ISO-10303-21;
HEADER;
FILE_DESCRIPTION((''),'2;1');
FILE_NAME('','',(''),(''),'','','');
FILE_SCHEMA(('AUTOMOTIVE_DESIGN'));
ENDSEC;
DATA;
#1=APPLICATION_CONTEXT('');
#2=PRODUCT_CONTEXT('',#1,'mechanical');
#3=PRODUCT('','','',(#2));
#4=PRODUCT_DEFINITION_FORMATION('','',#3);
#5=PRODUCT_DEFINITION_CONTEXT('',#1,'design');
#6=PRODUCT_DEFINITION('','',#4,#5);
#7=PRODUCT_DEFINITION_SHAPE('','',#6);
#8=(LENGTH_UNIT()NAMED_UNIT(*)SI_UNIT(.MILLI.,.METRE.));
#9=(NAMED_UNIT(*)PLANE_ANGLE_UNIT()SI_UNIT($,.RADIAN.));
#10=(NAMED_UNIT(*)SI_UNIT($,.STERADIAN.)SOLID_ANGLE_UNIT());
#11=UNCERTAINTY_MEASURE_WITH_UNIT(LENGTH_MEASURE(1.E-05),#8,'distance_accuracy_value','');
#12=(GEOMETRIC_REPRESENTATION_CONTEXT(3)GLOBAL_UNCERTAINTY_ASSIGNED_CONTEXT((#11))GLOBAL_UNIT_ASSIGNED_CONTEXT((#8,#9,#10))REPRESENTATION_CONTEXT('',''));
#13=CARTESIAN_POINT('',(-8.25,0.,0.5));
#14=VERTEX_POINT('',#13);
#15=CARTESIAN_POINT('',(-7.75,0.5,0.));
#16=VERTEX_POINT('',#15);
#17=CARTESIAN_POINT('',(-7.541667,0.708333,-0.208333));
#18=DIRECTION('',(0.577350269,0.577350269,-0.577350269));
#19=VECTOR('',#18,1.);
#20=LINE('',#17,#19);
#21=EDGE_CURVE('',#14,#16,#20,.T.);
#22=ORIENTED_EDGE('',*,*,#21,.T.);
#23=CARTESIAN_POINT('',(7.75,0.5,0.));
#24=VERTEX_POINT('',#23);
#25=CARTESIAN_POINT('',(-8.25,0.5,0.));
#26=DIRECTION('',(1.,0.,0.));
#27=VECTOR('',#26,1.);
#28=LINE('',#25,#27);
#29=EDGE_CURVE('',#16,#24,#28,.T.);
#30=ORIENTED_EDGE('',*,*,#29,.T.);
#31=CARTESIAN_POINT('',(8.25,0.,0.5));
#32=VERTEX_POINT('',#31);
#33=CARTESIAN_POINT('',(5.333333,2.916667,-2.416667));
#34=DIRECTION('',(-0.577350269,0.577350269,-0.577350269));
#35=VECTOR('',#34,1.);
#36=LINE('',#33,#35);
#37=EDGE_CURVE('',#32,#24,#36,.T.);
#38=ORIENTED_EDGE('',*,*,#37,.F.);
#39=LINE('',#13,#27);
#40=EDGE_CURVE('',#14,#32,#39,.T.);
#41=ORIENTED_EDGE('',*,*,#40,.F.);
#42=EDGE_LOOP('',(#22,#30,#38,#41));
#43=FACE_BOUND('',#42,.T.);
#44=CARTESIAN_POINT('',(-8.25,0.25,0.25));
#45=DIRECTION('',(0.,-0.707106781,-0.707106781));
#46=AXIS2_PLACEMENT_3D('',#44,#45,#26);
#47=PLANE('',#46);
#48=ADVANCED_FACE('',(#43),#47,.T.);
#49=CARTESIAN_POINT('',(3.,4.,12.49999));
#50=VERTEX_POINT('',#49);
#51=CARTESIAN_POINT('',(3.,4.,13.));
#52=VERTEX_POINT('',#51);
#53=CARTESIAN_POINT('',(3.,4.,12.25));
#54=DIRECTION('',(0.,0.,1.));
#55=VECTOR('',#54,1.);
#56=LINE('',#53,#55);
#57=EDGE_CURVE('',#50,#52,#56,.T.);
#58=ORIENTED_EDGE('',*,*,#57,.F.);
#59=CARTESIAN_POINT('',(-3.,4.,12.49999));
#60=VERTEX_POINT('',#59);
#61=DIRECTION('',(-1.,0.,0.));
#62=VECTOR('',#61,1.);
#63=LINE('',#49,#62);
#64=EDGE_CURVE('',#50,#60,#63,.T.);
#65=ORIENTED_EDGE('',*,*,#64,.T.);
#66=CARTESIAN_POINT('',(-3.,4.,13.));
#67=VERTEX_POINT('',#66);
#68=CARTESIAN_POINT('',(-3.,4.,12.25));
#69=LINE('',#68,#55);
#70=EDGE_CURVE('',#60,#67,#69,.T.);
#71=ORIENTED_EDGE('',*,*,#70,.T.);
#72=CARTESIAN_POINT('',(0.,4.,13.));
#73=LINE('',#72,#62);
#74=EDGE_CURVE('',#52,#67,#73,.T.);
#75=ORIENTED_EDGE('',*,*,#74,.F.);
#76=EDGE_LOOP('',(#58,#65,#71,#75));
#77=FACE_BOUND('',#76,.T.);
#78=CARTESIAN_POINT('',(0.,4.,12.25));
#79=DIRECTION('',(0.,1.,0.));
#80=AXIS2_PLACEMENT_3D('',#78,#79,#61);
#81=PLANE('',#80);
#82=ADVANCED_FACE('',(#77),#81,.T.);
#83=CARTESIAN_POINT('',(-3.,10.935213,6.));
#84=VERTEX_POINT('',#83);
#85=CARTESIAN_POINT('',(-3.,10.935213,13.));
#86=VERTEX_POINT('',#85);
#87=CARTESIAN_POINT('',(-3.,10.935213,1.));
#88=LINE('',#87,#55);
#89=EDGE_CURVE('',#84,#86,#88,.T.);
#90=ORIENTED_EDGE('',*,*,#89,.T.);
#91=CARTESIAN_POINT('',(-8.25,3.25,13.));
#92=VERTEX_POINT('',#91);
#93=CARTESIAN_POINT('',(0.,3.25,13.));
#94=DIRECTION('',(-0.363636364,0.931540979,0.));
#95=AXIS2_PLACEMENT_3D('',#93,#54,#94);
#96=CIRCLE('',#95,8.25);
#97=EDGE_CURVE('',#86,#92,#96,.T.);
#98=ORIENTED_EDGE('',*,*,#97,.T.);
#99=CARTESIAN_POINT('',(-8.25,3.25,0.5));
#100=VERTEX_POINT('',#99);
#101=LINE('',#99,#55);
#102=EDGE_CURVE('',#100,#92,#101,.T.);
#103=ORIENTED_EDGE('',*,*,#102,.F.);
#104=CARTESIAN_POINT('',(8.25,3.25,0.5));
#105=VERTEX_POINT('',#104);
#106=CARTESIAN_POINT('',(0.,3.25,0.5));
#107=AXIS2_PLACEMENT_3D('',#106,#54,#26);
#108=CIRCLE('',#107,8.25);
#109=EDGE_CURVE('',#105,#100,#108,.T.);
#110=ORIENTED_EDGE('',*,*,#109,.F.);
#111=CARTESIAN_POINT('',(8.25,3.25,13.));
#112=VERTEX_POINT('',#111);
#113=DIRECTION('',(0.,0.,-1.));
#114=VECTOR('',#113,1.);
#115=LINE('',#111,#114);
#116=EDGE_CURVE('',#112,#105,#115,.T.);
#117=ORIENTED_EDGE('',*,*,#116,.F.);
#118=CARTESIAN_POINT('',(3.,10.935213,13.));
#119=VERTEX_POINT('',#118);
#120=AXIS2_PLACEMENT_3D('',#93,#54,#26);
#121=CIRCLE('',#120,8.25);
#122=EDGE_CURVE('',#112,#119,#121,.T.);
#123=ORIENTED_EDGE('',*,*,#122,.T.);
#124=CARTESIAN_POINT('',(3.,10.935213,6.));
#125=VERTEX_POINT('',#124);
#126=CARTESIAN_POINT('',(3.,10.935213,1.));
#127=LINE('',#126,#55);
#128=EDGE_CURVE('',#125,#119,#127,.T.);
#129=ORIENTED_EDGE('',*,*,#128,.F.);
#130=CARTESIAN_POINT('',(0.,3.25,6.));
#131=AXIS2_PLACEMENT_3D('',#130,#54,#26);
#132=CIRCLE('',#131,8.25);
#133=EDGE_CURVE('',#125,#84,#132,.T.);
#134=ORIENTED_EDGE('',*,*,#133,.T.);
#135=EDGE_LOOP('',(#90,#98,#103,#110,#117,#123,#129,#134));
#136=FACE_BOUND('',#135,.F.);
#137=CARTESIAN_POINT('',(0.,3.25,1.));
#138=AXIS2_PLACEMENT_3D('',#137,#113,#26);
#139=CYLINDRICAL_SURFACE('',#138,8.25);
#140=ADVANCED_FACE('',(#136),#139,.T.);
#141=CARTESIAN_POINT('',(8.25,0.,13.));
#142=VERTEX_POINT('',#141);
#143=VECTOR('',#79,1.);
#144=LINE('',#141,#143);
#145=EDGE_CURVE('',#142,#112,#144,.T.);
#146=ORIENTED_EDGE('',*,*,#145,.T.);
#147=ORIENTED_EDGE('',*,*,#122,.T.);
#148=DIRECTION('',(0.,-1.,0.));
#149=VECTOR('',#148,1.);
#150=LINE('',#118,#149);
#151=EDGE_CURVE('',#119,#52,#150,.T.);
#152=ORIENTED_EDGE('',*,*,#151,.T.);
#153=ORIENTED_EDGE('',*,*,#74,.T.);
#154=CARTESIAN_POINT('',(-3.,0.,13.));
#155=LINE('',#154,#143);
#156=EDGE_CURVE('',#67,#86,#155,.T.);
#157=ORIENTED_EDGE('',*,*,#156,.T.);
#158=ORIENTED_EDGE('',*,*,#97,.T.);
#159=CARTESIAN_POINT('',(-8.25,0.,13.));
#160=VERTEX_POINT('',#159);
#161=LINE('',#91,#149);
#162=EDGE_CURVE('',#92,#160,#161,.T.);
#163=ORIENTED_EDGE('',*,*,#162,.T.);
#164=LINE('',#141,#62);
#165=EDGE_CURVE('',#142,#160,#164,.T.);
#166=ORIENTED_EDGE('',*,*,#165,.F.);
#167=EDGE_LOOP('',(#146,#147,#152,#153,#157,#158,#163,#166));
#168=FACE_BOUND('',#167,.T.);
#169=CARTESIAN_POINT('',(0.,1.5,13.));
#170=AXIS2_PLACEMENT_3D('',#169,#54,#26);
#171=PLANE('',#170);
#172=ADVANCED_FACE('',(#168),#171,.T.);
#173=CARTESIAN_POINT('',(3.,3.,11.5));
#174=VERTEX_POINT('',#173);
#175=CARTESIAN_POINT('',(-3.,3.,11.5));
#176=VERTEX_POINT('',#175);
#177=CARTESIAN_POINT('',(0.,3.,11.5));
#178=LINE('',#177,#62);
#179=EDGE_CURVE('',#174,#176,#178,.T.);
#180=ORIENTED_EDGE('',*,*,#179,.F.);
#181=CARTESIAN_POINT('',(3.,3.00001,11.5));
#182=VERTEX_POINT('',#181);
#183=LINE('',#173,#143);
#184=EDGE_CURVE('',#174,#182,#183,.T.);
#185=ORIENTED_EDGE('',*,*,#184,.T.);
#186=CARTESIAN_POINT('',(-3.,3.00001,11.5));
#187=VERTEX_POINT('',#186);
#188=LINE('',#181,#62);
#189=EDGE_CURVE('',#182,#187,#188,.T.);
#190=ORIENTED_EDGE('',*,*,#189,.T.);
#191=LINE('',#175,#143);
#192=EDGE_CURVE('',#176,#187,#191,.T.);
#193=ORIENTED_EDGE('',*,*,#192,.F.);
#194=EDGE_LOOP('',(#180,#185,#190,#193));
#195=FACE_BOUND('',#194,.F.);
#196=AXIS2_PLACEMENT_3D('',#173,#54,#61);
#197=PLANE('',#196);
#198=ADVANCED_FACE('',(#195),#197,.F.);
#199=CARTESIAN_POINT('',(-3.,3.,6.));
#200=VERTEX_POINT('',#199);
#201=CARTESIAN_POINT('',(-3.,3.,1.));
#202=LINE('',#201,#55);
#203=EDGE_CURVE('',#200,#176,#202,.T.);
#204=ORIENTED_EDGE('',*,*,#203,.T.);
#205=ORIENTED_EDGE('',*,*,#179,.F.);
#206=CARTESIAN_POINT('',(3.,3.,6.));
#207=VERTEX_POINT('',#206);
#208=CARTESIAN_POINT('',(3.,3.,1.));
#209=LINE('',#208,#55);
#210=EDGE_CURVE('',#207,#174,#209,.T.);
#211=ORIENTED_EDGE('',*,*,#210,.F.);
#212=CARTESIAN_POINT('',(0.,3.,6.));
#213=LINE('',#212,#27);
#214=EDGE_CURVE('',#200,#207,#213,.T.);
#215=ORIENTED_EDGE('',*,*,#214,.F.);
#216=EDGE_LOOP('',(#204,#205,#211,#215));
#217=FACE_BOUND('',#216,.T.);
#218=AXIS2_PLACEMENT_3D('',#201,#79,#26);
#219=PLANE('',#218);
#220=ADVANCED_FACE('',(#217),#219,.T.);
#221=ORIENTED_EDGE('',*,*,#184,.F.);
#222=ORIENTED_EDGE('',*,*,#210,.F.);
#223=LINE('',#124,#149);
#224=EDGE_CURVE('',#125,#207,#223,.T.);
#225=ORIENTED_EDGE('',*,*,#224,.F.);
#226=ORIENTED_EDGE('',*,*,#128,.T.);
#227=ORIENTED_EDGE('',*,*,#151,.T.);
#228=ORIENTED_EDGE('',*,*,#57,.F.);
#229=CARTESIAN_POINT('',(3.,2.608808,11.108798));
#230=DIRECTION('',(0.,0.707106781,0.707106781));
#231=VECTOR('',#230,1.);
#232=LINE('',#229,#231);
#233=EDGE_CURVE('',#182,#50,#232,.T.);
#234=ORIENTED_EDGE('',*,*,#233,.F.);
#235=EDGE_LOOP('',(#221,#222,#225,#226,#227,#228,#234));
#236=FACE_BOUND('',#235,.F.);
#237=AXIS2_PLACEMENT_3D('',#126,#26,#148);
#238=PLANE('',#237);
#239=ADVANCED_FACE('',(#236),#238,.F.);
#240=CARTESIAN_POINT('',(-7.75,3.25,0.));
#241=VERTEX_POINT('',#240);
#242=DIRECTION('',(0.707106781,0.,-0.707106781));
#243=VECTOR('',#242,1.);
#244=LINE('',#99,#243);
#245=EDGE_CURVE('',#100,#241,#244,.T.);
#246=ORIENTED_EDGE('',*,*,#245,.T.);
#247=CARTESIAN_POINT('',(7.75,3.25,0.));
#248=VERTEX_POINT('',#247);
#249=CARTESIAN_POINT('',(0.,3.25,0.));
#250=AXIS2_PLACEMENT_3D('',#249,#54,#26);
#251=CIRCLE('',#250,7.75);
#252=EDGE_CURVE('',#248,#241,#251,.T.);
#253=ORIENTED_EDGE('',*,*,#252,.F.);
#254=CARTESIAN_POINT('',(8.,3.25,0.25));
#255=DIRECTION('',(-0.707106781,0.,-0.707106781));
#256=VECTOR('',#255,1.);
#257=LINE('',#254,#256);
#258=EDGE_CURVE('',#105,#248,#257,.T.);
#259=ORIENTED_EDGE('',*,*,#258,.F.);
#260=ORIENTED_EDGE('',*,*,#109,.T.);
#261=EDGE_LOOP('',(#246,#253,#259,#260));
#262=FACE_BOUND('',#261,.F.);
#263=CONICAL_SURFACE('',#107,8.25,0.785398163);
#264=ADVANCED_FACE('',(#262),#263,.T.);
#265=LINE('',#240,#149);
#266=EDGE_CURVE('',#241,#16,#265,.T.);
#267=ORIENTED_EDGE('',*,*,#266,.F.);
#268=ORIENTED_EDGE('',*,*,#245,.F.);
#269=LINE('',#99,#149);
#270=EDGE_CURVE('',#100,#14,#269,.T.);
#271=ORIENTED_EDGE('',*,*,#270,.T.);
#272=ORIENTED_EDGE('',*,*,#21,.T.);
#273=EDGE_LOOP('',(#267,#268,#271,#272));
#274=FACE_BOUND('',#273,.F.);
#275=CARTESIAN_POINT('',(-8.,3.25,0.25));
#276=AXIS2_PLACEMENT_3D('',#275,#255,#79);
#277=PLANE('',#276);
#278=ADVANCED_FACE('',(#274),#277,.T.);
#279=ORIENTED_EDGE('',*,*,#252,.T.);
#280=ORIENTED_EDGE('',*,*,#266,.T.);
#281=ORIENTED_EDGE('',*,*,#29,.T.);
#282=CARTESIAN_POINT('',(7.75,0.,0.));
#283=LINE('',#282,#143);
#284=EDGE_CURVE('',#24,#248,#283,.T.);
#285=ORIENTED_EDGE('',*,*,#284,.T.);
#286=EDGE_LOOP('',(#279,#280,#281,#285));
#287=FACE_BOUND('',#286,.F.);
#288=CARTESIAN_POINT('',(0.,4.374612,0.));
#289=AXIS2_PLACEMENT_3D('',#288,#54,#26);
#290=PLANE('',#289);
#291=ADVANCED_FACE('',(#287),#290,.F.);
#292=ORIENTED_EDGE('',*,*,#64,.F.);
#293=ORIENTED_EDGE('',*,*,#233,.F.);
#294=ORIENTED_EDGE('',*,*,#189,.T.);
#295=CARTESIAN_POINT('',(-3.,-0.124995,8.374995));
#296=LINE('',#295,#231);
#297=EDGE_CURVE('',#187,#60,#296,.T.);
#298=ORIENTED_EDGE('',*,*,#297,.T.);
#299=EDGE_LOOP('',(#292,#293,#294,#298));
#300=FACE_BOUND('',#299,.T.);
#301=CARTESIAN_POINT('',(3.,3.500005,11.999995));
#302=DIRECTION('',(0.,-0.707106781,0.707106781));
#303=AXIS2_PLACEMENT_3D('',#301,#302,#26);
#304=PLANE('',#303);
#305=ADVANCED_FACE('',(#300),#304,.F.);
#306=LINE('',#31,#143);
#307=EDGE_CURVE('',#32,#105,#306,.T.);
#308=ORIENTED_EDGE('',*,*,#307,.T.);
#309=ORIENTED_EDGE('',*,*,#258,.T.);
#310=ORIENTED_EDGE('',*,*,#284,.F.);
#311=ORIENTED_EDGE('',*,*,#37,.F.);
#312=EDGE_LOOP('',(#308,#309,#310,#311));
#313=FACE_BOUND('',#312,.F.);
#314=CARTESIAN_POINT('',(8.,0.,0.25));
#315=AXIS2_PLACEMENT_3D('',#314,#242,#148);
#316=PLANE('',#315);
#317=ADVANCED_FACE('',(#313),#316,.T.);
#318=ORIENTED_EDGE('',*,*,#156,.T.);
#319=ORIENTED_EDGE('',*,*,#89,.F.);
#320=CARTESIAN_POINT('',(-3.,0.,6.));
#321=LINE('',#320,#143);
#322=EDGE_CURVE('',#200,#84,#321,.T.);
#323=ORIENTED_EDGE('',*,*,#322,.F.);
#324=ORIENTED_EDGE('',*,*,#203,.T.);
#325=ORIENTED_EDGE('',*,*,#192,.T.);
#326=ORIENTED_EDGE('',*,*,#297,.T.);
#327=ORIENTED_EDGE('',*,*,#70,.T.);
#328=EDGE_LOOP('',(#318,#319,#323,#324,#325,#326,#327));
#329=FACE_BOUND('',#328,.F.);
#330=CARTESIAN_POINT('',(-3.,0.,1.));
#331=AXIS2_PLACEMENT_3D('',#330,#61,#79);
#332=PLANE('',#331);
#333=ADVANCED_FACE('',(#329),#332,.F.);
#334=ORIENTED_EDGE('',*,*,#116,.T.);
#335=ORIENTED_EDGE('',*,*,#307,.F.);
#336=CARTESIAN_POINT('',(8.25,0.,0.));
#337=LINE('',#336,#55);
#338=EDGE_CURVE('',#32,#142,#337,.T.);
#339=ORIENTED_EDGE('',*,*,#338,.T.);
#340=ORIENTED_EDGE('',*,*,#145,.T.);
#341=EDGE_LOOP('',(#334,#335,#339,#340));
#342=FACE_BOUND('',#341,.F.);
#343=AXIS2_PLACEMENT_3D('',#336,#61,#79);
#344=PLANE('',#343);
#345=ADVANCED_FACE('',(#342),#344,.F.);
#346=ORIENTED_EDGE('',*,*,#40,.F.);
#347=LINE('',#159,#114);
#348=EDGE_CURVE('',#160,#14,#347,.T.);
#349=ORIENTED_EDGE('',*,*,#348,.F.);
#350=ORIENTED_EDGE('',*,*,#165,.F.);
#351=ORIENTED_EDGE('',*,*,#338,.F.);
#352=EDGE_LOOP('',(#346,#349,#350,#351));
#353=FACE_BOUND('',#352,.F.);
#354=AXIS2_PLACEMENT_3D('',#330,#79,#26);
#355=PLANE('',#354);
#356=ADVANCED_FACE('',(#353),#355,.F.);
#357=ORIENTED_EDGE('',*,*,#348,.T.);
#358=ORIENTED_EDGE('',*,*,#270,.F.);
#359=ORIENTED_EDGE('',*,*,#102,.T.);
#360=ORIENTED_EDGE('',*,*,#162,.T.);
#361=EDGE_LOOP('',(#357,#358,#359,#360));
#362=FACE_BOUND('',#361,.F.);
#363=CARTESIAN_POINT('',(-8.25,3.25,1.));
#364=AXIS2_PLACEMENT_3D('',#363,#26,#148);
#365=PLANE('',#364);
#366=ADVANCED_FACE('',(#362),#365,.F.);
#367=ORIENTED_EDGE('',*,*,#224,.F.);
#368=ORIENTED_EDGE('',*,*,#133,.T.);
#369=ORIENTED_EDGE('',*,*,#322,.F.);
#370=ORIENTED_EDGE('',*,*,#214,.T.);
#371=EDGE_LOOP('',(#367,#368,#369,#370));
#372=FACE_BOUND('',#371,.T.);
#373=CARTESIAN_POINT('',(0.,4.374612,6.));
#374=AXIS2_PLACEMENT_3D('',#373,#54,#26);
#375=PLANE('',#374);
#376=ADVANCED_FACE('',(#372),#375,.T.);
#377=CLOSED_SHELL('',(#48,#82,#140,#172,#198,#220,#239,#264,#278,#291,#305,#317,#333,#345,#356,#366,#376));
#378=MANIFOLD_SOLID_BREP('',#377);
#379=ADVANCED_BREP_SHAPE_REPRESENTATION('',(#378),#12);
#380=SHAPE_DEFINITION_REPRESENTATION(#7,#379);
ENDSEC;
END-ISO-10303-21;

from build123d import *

# Parameters (mm, degrees)
F4_DEPTH  = 1
F6_DEPTH  = 12
F7_SIZE   = 0.5
F8_W      = 6
F8_H      = 3
F9_DEPTH  = 12
F10_DEPTH = 5
F11_W     = 6
F11_H     = 1.5
F12_DEPTH = 1
F13_SIZE  = 0.99999


# Not quite as in the source:
# - a fillet or chamfer is up to 0.001 mm smaller than in the source, because OpenCascade refuses the exact size


with BuildPart() as f4:
    # F3 (on Top) → F4 (new body)
    with BuildSketch(Plane.XY):
        with BuildLine():
            Line((-8.25, 0), (0, 0))
            Line((0, 0), (8.25, 0))
            Line((8.25, 0), (8.25, 3.25))
            ThreePointArc((8.25, 3.25), (0, 11.5), (-8.25, 3.25))
            Line((-8.25, 3.25), (-8.25, 0))
        make_face()
    extrude(amount=F4_DEPTH)

    # F5 (on face) → F6 (join)
    with BuildSketch(Plane.XY.offset(1)):
        with BuildLine():
            Line((-3, 0), (-3, 10.9352130745))
            ThreePointArc((-3, 10.9352130745), (-6.8122132967, 7.9036276172), (-8.25, 3.25))
            Line((-8.25, 3.25), (-8.25, 0))
            Line((-8.25, 0), (-3, 0))
        make_face()
        with BuildLine():
            ThreePointArc((8.25, 3.25), (6.8122132967, 7.9036276172), (3, 10.9352130745))
            Line((3, 10.9352130745), (3, 0))
            Line((3, 0), (8.25, 0))
            Line((8.25, 0), (8.25, 3.25))
        make_face()
    extrude(amount=F6_DEPTH)

    # F7
    f7_edges = [f4.edges().sort_by_distance(p)[0] for p in [
        (8.25, 1.625, 0),
        (0, 0, 0),
    ]]
    chamfer(f7_edges, length=F7_SIZE)

    # F8 (on face) → F9 (join)
    with BuildSketch(Plane.XY.offset(1)):
        with Locations((0, 1.5)):
            Rectangle(F8_W, F8_H)
    extrude(amount=F9_DEPTH)

    # F10 (add): a face of the model
    f10_faces = [f4.faces().sort_by_distance(p)[0] for p in [
        (0, 7.1588841066, 1),
    ]]
    extrude(f10_faces, amount=F10_DEPTH)

    # F11 (on face) → F12 (join)
    with BuildSketch(Plane(origin=(0, 3, 0), x_dir=(-1, 0, 0), z_dir=(0, 1, 0))):
        with Locations((0, 12.25)):
            Rectangle(F11_W, F11_H)
    extrude(amount=F12_DEPTH)

    # F13 (size 1 in the source; OpenCascade refuses exactly that, so slightly less here)
    f13_edges = [f4.edges().sort_by_distance(p)[0] for p in [
        (0, 4, 11.5),
    ]]
    chamfer(f13_edges, length=F13_SIZE)


solid = f4.part
